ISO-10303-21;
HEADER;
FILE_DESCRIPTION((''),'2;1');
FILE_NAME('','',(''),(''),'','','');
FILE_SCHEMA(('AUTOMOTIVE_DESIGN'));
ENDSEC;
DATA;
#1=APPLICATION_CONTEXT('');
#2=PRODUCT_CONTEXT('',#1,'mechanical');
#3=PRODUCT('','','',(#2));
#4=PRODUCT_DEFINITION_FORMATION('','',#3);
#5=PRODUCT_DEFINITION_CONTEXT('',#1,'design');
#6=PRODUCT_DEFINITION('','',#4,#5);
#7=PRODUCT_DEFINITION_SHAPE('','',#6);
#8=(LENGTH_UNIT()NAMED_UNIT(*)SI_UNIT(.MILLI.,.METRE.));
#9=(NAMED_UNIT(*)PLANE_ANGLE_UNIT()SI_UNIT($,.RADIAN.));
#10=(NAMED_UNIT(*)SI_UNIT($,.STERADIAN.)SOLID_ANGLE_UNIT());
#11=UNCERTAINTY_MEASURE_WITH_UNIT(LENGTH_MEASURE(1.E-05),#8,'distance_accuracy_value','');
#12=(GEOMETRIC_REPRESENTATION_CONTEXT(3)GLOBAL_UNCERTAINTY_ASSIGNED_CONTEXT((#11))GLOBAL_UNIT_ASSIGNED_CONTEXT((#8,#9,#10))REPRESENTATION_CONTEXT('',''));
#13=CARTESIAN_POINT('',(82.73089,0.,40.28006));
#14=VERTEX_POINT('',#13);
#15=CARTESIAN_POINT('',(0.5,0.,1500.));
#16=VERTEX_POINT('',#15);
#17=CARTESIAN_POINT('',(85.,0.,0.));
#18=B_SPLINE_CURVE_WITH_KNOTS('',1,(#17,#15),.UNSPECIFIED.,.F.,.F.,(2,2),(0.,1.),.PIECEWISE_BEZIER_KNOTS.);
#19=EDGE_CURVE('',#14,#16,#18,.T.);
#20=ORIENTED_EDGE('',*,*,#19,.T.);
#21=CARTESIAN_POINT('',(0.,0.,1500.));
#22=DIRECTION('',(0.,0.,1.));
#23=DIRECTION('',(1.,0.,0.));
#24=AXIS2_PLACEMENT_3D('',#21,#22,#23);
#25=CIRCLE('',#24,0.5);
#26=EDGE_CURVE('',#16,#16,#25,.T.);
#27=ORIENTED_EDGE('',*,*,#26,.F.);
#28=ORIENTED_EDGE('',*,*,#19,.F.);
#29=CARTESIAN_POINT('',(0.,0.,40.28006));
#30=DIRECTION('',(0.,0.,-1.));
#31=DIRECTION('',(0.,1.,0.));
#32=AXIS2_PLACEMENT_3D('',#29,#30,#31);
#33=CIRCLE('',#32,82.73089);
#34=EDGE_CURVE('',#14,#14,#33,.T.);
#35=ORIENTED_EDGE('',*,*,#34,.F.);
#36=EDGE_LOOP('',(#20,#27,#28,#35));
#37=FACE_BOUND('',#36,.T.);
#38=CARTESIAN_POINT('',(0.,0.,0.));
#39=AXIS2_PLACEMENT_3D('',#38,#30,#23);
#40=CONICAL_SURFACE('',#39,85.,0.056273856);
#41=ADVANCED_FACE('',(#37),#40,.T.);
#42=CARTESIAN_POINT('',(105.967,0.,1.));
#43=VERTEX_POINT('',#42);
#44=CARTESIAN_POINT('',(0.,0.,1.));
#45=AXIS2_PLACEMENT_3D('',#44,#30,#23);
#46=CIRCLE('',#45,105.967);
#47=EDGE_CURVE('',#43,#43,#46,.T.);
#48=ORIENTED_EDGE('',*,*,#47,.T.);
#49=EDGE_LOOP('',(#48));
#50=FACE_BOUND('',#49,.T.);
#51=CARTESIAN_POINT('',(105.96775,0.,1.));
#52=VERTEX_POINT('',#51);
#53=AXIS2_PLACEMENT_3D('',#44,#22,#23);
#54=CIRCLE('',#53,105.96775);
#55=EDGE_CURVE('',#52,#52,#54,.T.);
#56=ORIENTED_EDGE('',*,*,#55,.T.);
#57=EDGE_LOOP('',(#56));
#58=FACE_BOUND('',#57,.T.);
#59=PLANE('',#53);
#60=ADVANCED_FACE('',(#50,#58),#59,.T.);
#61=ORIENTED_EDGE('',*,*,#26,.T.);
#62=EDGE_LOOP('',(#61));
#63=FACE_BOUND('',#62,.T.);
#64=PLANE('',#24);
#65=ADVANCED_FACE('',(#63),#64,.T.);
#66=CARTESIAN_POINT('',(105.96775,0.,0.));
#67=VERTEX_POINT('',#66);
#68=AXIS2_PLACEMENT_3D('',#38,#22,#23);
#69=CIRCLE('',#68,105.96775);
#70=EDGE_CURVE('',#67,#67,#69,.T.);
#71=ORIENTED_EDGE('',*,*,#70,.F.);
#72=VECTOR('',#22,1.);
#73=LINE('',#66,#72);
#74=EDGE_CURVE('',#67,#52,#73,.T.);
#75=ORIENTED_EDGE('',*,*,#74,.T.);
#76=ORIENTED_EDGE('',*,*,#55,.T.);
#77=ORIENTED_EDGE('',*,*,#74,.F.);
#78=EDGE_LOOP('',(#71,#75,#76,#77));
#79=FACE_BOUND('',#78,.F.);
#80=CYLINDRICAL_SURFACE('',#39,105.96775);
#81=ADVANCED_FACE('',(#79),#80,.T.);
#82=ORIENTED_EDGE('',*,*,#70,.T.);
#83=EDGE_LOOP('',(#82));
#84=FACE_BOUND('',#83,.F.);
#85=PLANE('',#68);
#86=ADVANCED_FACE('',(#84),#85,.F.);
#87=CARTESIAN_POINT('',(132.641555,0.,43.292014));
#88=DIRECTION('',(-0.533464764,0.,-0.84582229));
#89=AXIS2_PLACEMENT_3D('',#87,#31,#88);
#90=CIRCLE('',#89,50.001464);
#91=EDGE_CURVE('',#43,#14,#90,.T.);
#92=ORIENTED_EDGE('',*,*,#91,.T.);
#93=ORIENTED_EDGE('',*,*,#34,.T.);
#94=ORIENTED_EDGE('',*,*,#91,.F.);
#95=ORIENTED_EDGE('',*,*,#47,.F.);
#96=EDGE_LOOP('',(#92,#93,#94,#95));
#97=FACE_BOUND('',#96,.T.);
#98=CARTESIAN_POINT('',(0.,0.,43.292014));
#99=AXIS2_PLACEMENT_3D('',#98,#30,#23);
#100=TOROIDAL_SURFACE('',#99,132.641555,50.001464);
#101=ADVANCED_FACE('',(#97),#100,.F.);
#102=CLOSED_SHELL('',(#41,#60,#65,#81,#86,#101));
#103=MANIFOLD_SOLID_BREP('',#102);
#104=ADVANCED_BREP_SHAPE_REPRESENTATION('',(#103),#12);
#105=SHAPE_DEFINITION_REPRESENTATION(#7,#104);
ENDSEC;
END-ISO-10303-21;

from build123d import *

# Parameters (mm, degrees)
F0_R     = 85
F2_R     = 0.5
F4_R     = 105.9677495378
F5_DEPTH = 1


# Not quite as in the source:
# - a fillet or chamfer that OpenCascade refuses, or shapes differently, is made with other operations: its cross-section is extruded or revolved along the edge and cut away or added


with BuildPart() as f3:
    # F0 (on Top) → F3 section 0
    with BuildSketch(Plane.XY):
        Circle(F0_R)
    # F2 (on offset) → F3 section 1
    with BuildSketch(Plane.XY.offset(1500)):
        Circle(F2_R)
    loft()

    # F4 (on Top) → F5 (join)
    with BuildSketch(Plane.XY):
        Circle(F4_R)
    extrude(amount=F5_DEPTH)

    # F6: fillet of radius 50 on 1 edges, made by hand


with BuildPart() as f6_tool2:
    # F6_s3 → F6_t4 (revolve)
    with BuildSketch(Plane.XZ):
        with BuildLine():
            ThreePointArc((105.9675361519, 0.9996616711), (89.555381413, 17.9202187852), (82.7192415892, 40.4797238448))
            Line((82.7192415892, 40.4797238448), (77.7270102291, 40.1984948115))
            ThreePointArc((77.7270102291, 40.1984948115), (78.8394224512, 20.458644138), (79.9514353065, 0.7187709667))
            Line((79.9514353065, 0.7187709667), (84.9436666667, -4.0001463701))
            ThreePointArc((84.9436666667, -4.0001463701), (95.4556014093, -4.0001463701), (103.300134248, -3.2295735796))
            Line((103.300134248, -3.2295735796), (105.9675361519, 0.9996616711))
        make_face()
    revolve(axis=Axis((0, 0, 1), (0, 0, 1)))

    split(bisect_by=Plane.XY, keep=Keep.TOP)


with BuildPart() as f3_1:
    add(f3.part)

    # F6_t1: union F6_tool2
    add(f6_tool2.part)


solid = f3_1.part
